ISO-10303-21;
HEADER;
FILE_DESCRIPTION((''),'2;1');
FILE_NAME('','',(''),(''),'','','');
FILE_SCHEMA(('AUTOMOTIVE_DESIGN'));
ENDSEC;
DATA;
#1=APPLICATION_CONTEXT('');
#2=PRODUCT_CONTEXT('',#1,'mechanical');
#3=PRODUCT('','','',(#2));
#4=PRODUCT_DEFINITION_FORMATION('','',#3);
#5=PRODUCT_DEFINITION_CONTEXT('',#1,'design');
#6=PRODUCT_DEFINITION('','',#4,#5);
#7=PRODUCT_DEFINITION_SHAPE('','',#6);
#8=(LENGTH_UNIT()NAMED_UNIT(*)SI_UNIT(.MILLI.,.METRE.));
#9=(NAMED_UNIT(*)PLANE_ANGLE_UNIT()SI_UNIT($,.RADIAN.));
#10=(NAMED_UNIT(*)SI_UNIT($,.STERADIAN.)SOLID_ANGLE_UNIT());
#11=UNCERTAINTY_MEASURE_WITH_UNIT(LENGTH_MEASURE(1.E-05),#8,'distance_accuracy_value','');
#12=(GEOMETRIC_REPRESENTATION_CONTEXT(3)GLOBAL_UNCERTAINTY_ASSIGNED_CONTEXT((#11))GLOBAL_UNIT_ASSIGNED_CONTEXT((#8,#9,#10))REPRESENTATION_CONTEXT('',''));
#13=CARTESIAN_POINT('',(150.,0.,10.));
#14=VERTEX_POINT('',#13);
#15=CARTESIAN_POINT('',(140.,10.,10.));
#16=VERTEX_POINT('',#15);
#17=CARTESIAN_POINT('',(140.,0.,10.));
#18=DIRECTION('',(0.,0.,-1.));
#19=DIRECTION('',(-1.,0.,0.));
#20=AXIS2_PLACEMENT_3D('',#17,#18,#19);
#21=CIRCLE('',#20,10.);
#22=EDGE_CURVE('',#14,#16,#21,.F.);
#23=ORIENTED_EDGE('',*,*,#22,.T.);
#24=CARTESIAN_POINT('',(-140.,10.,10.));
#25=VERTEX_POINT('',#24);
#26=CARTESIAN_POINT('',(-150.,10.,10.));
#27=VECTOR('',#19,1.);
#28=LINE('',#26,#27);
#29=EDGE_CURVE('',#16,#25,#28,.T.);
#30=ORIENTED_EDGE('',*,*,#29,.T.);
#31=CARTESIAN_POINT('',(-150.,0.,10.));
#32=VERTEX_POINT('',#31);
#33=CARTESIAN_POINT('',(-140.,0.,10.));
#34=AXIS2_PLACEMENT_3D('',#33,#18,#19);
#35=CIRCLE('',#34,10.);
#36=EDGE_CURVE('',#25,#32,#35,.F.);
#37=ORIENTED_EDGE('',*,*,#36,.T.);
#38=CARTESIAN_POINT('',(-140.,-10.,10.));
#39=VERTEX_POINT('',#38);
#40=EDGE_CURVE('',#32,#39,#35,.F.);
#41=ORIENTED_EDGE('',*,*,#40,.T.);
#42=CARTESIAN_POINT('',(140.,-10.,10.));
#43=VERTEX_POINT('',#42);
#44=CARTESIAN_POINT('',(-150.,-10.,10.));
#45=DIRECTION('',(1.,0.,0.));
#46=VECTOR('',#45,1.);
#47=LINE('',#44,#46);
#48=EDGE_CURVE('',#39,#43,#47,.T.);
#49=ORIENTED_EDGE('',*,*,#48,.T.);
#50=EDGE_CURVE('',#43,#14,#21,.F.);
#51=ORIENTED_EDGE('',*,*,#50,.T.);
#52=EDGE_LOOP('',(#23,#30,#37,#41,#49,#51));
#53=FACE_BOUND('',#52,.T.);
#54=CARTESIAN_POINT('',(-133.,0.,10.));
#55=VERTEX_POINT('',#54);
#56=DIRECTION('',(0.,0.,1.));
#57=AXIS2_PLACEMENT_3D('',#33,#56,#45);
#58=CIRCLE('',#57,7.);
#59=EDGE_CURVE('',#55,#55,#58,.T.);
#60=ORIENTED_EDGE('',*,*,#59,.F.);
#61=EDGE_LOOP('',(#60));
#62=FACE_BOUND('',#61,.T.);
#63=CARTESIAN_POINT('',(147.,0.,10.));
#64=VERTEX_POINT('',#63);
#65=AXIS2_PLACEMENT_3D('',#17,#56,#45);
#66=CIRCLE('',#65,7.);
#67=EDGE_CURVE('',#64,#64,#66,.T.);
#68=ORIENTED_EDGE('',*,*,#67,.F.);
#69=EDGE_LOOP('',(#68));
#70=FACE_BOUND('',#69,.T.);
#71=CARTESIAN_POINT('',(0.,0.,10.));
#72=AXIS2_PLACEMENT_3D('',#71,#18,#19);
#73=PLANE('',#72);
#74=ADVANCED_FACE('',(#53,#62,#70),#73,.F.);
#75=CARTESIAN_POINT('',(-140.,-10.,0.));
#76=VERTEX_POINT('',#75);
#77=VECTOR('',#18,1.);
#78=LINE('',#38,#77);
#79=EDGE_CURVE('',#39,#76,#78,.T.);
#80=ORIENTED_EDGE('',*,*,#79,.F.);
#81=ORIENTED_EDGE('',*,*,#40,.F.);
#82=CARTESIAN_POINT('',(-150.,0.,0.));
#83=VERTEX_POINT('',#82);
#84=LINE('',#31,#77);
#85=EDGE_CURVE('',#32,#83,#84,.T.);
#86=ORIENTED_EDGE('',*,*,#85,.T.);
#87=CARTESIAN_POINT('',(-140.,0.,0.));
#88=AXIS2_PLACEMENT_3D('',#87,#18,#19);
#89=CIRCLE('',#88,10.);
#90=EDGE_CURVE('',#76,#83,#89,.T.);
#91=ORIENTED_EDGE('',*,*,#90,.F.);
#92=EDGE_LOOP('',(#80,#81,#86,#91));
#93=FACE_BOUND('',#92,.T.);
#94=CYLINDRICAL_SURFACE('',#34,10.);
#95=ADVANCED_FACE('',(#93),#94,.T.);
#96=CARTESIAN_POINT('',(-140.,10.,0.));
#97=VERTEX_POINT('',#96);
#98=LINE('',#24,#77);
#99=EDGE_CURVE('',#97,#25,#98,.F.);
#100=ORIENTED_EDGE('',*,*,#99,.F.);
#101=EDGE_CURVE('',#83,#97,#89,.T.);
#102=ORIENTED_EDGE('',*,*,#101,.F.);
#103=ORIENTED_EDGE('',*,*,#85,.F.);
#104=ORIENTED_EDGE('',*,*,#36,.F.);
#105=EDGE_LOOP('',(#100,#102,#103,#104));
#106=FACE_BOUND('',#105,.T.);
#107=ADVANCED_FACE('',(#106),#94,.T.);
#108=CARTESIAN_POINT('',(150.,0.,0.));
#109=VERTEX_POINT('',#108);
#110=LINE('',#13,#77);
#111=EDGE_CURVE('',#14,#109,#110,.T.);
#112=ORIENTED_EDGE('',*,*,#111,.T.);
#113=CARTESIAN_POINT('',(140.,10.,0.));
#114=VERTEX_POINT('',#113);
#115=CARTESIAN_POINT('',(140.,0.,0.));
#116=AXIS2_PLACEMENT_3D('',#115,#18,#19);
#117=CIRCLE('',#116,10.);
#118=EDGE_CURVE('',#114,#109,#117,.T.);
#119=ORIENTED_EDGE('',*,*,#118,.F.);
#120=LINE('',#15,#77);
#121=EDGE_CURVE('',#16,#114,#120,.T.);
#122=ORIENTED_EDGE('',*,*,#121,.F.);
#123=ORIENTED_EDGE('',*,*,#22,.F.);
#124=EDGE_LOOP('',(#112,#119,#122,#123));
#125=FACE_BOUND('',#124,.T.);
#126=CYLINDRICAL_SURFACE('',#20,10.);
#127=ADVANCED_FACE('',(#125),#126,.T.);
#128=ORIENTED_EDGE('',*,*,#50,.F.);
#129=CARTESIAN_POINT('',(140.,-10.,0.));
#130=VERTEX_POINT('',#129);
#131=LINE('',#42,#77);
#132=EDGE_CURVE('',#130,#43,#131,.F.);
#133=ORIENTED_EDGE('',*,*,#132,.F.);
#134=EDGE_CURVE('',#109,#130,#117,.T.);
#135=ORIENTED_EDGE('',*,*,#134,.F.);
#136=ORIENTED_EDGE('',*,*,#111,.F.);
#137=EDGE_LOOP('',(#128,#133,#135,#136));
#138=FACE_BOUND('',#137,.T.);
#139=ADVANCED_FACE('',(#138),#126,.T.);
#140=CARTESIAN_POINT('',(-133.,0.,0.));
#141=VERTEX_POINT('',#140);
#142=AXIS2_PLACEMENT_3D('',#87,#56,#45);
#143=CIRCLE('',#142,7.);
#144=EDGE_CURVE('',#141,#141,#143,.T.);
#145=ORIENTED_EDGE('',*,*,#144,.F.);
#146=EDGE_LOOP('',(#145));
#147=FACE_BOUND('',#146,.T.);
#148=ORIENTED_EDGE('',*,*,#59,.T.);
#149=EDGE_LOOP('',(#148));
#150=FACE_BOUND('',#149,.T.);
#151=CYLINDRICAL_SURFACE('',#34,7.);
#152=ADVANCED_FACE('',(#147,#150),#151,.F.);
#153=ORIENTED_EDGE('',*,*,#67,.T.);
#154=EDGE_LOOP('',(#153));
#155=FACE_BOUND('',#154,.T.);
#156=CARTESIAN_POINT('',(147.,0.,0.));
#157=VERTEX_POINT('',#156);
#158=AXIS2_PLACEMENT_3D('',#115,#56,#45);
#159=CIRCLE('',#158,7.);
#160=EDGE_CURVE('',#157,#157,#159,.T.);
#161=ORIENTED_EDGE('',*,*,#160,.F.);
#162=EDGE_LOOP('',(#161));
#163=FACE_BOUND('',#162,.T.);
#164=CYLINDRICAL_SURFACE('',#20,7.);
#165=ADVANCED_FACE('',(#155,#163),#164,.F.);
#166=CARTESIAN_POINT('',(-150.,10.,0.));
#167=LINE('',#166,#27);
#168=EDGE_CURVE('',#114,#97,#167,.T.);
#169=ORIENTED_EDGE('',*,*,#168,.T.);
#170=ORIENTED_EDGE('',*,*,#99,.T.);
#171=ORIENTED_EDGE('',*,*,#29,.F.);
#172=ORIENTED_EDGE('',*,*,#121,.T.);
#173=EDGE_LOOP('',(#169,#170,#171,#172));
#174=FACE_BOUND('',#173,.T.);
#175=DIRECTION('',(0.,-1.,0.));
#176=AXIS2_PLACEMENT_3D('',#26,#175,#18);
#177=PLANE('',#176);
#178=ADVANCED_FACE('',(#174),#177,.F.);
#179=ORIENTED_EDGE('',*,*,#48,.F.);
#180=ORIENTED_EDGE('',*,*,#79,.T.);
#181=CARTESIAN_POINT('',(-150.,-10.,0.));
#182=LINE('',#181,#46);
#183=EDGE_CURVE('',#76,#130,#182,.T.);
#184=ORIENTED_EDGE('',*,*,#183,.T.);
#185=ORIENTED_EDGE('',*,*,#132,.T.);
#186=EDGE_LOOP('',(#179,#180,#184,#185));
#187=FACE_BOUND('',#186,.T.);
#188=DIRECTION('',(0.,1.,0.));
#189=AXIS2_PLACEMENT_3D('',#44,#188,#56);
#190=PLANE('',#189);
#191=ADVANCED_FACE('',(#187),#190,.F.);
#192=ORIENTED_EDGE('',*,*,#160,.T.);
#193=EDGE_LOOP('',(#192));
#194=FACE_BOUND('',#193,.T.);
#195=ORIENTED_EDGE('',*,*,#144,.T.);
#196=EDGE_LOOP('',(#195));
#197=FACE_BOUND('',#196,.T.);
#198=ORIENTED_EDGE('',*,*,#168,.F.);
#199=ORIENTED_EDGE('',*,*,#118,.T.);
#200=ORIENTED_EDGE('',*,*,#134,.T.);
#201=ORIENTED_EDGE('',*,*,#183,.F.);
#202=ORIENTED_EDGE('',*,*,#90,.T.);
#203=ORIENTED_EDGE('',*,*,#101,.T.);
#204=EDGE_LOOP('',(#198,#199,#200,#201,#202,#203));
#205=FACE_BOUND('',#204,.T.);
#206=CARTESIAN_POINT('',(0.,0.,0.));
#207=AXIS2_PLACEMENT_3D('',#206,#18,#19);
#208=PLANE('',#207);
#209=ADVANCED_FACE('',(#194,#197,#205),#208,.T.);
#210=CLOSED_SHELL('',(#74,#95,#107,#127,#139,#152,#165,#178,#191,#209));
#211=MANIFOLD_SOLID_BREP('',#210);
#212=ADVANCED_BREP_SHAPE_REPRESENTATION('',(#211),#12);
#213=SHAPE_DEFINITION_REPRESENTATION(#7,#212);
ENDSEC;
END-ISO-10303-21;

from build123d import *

# Parameters (mm, degrees)
SKETCH_1_W      = 300
SKETCH_1_H      = 20
SKETCH_1_R      = 7
EXTRUDE_1_DEPTH = 10
FILLET_1_R      = 10


with BuildPart() as part:
    # 草图1 → 凸台-拉伸1 (new body)
    with BuildSketch(Plane.XY):
        Rectangle(SKETCH_1_W, SKETCH_1_H)
        with Locations((-140, 0)):
            Circle(SKETCH_1_R, mode=Mode.SUBTRACT)
        with Locations((140, 0)):
            Circle(SKETCH_1_R, mode=Mode.SUBTRACT)
    extrude(amount=EXTRUDE_1_DEPTH)

    # 圆角1
    fillet_1_edges = [part.edges().sort_by_distance(p)[0] for p in [
        (150, 10, 5),
        (150, -10, 5),
        (-150, -10, 5),
        (-150, 10, 5),
    ]]
    fillet(fillet_1_edges, radius=FILLET_1_R - 0.0001)  # a hair under: the kernel refuses the full size


solid = part.part
